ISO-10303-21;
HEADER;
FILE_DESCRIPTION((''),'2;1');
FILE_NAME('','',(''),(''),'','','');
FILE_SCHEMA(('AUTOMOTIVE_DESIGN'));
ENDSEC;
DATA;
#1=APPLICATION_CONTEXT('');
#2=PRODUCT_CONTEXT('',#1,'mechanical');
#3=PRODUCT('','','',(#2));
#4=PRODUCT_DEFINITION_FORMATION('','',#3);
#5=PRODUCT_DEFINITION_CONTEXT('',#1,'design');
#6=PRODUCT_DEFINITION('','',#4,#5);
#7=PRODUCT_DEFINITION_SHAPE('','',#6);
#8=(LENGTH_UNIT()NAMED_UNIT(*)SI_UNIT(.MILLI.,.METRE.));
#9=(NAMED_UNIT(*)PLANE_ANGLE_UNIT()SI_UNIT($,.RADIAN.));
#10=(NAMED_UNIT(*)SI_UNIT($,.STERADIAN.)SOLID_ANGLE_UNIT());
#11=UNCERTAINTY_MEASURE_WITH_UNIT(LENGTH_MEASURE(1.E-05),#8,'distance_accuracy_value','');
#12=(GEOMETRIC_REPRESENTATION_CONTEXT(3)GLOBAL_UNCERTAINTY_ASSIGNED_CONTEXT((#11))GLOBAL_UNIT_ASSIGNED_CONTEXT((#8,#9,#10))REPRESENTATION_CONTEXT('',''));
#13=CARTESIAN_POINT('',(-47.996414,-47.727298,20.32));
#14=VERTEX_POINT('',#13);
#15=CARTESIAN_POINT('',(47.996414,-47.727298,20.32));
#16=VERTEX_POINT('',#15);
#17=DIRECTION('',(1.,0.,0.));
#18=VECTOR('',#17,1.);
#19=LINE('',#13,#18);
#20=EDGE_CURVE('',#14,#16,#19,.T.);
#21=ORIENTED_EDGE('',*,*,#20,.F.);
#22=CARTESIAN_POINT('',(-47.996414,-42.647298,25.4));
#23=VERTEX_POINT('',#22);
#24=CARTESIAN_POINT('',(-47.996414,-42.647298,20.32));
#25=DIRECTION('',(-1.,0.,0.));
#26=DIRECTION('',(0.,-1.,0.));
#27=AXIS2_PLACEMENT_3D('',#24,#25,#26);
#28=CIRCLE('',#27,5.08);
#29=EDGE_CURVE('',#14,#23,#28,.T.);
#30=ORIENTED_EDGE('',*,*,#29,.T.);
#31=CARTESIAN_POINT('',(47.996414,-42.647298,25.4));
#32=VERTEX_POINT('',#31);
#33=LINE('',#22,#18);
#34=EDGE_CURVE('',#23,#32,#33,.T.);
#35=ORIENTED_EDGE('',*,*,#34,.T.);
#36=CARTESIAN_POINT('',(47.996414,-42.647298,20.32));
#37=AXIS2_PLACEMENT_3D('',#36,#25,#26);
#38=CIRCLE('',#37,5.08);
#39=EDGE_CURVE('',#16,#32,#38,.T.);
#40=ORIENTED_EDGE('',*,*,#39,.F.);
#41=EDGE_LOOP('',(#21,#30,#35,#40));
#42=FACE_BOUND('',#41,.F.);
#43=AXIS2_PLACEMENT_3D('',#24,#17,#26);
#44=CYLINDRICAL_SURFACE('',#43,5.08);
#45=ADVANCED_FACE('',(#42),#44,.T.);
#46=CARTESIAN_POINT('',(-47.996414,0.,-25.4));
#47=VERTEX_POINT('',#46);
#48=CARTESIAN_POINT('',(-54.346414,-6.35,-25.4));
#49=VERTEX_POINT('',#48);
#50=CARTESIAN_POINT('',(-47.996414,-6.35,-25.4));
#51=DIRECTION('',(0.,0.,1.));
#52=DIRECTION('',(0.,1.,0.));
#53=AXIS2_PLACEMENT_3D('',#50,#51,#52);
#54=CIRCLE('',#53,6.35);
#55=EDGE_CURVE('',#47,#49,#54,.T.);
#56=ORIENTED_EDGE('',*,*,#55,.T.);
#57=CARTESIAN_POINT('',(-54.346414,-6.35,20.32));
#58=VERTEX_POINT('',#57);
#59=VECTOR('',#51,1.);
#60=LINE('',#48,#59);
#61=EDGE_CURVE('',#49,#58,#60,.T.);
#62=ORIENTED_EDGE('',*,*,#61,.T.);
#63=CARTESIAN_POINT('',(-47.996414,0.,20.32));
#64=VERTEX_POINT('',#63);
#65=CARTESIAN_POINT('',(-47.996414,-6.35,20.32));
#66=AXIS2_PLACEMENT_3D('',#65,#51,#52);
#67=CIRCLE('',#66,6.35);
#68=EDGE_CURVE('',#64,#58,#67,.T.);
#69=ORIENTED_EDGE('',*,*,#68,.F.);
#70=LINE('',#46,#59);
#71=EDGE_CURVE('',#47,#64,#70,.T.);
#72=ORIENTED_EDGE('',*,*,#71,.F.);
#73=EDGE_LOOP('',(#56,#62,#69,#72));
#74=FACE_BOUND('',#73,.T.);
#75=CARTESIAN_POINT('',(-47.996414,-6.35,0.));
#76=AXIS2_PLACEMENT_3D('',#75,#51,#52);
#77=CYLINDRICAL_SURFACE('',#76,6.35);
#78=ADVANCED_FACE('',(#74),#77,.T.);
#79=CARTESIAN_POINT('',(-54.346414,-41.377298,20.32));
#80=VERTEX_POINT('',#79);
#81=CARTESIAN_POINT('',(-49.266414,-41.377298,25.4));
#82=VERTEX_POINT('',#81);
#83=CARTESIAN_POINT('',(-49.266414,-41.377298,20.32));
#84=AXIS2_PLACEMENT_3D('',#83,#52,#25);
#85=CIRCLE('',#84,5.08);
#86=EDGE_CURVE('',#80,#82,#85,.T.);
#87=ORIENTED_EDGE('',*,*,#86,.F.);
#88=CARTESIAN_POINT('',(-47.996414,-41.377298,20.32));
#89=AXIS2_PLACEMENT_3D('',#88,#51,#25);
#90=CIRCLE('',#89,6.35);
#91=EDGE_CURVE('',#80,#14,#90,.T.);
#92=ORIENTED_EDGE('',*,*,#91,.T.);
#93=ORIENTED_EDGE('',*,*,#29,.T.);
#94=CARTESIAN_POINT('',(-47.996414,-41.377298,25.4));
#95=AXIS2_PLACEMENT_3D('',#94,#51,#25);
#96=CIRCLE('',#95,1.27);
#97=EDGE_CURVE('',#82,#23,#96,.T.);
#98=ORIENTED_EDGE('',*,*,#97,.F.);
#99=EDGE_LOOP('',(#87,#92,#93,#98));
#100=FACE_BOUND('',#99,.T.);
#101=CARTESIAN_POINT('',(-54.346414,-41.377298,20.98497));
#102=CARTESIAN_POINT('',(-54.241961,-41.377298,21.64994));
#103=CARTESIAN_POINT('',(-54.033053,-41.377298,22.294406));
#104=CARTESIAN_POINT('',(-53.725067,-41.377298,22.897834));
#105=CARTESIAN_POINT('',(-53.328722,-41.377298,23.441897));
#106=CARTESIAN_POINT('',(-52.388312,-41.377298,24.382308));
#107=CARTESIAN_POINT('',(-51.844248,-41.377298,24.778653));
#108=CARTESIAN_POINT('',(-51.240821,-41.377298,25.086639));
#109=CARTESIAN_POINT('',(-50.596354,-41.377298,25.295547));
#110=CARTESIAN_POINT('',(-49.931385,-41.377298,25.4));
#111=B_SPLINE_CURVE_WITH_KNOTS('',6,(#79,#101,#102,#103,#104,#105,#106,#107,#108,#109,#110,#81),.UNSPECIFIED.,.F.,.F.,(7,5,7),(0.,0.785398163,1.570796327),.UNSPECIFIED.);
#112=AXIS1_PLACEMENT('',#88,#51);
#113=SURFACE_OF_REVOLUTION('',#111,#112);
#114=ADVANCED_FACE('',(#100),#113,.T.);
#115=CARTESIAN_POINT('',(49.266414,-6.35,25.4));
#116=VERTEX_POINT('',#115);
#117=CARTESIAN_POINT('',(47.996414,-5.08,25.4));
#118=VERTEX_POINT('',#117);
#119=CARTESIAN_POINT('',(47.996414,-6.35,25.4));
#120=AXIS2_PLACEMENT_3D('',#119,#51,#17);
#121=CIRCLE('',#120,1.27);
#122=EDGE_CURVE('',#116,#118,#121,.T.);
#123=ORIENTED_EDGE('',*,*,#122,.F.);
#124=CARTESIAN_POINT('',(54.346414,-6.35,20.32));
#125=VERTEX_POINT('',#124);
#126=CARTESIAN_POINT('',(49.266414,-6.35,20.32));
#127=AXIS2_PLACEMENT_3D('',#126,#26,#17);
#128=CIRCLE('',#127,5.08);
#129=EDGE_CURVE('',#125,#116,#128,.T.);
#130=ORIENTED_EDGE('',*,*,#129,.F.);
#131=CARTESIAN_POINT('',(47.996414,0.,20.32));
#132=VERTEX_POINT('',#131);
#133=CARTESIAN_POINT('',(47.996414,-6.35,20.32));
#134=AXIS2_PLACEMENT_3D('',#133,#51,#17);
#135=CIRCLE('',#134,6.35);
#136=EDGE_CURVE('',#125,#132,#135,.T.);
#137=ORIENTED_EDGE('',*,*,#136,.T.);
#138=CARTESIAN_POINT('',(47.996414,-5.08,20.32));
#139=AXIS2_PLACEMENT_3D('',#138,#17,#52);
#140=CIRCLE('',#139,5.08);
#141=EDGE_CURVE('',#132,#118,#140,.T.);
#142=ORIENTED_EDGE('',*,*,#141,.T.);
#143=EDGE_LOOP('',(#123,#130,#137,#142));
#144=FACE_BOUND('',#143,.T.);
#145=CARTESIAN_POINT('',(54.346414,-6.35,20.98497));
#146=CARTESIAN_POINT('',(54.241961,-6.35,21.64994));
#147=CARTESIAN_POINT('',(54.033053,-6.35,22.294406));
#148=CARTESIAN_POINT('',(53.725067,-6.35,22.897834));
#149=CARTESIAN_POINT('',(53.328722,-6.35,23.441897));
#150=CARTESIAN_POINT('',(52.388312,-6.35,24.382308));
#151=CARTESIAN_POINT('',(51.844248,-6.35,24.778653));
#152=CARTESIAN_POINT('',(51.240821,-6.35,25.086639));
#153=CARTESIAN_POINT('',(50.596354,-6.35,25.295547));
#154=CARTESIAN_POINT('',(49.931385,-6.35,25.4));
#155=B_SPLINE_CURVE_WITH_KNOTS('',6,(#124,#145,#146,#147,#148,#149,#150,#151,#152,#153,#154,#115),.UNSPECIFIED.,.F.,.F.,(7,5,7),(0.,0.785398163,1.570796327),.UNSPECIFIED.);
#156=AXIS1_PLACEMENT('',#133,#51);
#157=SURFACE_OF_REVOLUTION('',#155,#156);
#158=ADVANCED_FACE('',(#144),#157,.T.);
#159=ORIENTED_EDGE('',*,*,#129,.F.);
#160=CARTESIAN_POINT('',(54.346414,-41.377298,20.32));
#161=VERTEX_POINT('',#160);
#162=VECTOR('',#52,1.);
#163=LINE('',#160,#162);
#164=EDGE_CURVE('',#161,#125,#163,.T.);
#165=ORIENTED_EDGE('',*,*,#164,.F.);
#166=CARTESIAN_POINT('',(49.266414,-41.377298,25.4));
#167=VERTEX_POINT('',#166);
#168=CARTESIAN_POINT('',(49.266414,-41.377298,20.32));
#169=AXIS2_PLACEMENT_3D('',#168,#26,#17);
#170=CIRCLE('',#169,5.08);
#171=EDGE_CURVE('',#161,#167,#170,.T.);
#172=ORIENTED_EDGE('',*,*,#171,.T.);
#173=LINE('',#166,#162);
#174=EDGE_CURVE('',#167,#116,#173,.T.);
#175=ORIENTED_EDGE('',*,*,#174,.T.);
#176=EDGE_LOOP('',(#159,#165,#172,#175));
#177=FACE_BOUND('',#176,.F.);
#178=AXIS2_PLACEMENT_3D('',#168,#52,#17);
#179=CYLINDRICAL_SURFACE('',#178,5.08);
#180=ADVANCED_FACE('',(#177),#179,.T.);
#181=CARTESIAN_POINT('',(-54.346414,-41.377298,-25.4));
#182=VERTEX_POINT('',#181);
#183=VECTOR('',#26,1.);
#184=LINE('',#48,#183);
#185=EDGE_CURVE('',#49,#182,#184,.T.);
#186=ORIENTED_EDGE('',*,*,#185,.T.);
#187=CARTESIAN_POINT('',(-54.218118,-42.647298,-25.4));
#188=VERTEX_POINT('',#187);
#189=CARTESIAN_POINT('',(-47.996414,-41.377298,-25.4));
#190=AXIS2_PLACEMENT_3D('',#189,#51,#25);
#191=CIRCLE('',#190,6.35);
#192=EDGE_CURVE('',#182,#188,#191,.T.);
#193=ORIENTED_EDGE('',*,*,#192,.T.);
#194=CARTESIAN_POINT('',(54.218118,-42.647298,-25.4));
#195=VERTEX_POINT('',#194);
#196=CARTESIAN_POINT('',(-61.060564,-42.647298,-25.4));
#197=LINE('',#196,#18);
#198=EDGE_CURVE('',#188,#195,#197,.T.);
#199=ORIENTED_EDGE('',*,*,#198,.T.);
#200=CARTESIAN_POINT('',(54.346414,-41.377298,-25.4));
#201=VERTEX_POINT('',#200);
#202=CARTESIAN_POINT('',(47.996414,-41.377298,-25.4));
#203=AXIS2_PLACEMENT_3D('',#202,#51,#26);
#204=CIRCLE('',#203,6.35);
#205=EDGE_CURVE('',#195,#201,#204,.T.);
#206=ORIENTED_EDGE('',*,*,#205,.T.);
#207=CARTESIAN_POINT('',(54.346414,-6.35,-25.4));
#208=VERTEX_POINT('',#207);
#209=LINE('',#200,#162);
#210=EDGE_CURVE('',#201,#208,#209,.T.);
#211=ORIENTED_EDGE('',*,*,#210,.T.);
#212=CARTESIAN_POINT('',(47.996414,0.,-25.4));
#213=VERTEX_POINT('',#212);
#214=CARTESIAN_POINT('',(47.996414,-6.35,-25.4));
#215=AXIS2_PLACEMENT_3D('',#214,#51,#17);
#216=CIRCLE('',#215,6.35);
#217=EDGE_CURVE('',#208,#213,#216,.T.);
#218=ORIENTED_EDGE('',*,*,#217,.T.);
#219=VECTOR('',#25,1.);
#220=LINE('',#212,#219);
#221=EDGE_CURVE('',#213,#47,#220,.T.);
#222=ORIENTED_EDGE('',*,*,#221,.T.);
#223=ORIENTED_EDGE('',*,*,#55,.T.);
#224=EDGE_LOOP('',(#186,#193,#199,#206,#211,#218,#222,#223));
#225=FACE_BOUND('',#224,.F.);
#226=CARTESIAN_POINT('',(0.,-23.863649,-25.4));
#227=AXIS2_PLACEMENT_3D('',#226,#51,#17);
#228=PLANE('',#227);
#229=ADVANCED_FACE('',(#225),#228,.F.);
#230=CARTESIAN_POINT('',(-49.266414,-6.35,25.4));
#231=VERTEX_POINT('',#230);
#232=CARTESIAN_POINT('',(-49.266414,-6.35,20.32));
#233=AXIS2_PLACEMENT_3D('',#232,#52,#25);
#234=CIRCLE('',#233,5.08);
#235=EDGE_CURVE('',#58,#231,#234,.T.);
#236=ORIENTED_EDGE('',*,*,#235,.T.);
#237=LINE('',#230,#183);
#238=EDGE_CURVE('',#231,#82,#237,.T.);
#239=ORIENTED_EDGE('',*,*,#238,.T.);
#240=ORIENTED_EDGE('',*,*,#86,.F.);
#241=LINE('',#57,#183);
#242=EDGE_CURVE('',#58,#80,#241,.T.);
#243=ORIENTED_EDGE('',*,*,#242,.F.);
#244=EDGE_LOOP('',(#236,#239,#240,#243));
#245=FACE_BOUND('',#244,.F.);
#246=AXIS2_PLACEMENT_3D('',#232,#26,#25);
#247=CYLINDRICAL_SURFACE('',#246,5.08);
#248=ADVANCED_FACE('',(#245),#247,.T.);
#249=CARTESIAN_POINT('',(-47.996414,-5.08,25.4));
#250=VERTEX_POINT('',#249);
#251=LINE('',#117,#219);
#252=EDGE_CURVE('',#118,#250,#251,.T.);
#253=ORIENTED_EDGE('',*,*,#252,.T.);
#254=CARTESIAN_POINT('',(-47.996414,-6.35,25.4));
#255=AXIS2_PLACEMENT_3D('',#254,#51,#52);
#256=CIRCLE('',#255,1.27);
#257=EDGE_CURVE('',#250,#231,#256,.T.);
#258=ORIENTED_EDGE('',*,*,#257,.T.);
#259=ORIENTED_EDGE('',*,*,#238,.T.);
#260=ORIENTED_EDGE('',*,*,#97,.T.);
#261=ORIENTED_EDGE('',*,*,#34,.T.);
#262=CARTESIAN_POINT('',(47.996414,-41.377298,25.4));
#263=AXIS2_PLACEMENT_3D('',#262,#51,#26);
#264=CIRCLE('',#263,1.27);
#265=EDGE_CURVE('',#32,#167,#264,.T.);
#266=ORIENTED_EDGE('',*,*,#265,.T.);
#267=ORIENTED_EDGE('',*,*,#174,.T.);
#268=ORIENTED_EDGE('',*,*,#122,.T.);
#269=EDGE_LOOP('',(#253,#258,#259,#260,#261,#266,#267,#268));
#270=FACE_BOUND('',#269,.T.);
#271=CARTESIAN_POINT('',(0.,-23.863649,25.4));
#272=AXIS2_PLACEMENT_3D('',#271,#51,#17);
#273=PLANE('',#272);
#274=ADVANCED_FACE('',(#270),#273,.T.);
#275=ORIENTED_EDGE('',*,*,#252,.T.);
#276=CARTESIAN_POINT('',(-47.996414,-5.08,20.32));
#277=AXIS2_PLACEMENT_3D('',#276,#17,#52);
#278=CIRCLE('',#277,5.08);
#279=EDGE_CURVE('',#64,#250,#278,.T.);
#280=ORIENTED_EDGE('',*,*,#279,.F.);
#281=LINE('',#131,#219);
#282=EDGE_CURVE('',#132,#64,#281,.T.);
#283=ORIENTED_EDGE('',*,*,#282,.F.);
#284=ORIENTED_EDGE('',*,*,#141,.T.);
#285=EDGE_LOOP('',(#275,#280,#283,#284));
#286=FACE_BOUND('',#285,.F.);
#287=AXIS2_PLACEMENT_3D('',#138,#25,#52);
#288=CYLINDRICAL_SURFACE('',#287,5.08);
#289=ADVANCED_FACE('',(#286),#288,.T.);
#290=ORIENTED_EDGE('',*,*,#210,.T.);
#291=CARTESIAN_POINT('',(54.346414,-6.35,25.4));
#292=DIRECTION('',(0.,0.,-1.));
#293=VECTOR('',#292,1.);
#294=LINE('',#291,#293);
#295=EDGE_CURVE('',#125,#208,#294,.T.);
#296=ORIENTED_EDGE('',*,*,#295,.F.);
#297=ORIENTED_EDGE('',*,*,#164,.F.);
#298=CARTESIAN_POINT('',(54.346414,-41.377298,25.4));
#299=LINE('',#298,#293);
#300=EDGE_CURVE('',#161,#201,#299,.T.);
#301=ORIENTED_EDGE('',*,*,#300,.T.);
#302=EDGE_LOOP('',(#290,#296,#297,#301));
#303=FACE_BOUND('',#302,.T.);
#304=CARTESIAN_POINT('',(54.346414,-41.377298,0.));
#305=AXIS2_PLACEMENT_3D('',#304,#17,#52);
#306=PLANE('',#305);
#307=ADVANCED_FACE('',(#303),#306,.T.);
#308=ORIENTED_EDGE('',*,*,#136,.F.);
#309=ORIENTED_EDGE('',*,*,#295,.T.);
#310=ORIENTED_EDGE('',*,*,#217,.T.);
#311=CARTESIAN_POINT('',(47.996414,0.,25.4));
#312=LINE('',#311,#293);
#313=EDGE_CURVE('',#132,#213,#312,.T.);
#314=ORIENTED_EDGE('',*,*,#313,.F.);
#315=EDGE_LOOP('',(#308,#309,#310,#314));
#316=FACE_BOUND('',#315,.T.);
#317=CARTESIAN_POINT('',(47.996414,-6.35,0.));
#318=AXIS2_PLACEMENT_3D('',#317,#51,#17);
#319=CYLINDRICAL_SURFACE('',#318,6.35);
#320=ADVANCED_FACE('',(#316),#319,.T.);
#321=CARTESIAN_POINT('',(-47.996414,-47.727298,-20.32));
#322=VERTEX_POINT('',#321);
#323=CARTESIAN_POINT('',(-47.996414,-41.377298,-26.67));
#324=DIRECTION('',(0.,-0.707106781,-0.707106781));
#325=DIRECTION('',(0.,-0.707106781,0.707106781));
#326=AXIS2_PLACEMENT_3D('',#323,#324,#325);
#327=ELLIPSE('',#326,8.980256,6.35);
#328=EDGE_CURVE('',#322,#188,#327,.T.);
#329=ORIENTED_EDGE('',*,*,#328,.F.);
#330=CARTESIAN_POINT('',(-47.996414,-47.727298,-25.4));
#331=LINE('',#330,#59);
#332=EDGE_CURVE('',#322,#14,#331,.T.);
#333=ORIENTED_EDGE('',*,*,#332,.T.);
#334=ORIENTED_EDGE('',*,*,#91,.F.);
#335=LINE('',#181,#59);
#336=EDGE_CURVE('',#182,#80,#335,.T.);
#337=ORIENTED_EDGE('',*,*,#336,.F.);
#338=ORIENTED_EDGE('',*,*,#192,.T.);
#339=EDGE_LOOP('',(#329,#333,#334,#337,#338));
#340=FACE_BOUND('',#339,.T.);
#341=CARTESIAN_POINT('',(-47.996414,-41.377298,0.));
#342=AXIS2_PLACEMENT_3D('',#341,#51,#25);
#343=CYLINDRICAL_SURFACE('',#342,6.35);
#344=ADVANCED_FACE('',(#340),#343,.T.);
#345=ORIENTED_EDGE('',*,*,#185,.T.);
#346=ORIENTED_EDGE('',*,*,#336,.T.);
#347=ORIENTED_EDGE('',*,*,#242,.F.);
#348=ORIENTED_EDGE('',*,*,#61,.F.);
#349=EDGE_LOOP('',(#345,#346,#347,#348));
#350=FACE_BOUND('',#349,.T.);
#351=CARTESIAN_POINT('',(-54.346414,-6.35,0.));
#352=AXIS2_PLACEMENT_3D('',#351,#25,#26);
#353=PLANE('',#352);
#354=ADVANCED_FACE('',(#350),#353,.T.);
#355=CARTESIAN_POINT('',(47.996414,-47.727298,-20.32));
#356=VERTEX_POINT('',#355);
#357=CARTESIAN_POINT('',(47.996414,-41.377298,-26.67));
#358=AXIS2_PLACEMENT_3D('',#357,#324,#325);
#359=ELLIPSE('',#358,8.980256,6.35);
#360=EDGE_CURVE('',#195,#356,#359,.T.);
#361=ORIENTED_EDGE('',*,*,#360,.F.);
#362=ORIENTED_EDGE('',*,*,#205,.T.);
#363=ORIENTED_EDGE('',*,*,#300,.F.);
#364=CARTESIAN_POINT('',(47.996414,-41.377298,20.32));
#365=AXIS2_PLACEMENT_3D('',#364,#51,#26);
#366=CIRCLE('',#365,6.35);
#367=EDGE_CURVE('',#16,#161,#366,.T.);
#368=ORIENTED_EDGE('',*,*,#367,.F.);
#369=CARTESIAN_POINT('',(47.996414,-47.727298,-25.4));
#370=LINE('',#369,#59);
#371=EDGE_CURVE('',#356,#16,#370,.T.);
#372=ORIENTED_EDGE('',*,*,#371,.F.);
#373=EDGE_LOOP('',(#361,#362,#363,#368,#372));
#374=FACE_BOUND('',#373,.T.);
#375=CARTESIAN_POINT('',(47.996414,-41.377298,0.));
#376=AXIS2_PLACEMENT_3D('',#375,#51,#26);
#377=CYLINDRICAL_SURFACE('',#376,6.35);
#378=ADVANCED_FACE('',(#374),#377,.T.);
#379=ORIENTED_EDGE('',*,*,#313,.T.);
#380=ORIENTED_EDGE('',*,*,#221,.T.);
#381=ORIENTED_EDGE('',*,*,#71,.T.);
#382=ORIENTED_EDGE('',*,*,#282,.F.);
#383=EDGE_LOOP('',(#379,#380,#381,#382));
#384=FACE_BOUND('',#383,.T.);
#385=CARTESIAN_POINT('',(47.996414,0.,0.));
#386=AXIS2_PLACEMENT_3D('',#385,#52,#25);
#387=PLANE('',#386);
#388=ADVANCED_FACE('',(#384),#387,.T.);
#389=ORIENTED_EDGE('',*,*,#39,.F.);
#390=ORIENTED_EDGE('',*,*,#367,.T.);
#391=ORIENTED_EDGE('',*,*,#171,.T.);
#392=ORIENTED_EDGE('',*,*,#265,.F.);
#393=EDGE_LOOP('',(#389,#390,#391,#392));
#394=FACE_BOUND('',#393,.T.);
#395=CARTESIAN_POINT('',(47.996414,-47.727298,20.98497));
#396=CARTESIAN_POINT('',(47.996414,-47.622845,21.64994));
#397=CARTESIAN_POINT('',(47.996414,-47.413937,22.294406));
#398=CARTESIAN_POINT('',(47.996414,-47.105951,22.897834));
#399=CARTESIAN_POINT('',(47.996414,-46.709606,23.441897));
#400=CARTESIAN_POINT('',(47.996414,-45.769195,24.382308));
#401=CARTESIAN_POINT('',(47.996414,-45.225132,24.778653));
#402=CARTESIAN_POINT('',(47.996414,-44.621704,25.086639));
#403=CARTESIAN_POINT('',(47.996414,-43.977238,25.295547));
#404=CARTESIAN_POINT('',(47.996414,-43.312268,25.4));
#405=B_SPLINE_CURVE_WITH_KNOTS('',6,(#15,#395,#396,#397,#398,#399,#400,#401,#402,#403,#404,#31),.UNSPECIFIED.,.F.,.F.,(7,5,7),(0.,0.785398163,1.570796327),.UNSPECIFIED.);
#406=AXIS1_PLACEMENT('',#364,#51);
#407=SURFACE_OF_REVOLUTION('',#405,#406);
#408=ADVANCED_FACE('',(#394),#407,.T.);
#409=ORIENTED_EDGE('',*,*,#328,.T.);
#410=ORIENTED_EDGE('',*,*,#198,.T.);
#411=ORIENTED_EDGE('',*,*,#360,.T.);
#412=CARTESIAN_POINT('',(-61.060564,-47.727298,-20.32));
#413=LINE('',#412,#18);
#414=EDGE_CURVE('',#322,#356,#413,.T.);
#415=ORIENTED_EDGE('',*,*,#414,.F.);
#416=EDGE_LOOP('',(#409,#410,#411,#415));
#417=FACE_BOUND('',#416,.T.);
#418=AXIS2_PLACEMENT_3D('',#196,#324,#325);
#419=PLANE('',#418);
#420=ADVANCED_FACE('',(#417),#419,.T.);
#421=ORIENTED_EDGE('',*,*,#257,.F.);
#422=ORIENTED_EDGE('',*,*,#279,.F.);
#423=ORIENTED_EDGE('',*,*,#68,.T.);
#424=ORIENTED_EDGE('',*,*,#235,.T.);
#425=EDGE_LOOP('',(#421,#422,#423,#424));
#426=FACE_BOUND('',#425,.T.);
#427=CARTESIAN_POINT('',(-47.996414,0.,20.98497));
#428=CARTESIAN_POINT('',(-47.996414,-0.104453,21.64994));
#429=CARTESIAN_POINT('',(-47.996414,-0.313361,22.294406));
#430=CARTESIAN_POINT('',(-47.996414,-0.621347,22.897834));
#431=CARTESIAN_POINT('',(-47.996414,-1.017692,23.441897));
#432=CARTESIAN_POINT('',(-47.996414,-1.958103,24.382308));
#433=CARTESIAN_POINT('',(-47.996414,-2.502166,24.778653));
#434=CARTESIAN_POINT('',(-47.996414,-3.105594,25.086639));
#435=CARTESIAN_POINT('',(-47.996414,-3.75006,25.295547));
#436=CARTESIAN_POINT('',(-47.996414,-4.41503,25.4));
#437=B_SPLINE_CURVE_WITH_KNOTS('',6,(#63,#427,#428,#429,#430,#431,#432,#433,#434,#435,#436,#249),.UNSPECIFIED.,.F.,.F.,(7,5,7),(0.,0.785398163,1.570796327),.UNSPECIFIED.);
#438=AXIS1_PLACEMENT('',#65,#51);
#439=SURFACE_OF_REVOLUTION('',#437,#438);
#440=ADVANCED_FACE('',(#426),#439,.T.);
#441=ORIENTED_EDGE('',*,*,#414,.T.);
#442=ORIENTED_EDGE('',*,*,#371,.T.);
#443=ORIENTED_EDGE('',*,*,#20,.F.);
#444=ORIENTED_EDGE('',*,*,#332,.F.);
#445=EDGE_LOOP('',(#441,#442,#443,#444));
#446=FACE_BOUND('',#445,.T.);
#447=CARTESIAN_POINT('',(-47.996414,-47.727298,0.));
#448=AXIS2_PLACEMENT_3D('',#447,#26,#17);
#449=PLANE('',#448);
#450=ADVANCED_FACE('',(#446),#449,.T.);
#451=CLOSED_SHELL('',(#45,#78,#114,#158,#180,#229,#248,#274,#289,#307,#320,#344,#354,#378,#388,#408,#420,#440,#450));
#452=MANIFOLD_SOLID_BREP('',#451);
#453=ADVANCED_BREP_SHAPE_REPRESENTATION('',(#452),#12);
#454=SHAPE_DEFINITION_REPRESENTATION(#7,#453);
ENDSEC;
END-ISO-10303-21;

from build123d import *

# Parameters (mm, degrees)
F1_DEPTH      = 25.4
F1_DEPTH_BACK = 25.4
F2_R          = 5.08
F3_T1_DEPTH   = 122.1211277236


# Not quite as in the source:
# - a fillet or chamfer that OpenCascade refuses, or shapes differently, is made with other operations: its cross-section is extruded or revolved along the edge and cut away or added


with BuildPart() as f1:
    # F0 (on Top) → F1 (new body, two sides)
    with BuildSketch(Plane.XY) as f1_sk:
        with BuildLine():
            Line((47.9964142829, 0), (-47.9964142829, 0))
            ThreePointArc((-47.9964142829, 0), (-52.4865423435, -1.8598719395), (-54.3464142829, -6.35))
            Line((-54.3464142829, -6.35), (-54.3464142829, -41.3772979915))
            ThreePointArc((-54.3464142829, -41.3772979915), (-52.4865423435, -45.867426052), (-47.9964142829, -47.7272979915))
            Line((-47.9964142829, -47.7272979915), (47.9964142829, -47.7272979915))
            ThreePointArc((47.9964142829, -47.7272979915), (52.4865423435, -45.867426052), (54.3464142829, -41.3772979915))
            Line((54.3464142829, -41.3772979915), (54.3464142829, -6.35))
            ThreePointArc((54.3464142829, -6.35), (52.4865423435, -1.8598719395), (47.9964142829, 0))
        make_face()
    extrude(amount=F1_DEPTH)
    extrude(f1_sk.sketch, amount=-F1_DEPTH_BACK)

    # F2
    f2_edges = [f1.edges().sort_by_distance(p)[0] for p in [
        (0, -47.727298, 25.4),
        (54.346414, -23.863649, 25.4),
        (-52.486542, -45.867426, 25.4),
        (-54.346414, -23.863649, 25.4),
        (-52.486542, -1.859872, 25.4),
        (0, 0, 25.4),
        (52.486542, -1.859872, 25.4),
        (52.486542, -45.867426, 25.4),
    ]]
    fillet(f2_edges, radius=F2_R)

    # F3: chamfer of 5.08 on 1 edges, made by hand

    # F3_s2 → F3_t1 (cut)
    with BuildSketch(Plane.YZ.offset(-61.0605638618)):
        Polygon((-42.6472979915, -25.4), (-47.7272979915, -20.32), (-47.7272979915, -25.4), align=None)
    extrude(amount=F3_T1_DEPTH, mode=Mode.SUBTRACT)


solid = f1.part
